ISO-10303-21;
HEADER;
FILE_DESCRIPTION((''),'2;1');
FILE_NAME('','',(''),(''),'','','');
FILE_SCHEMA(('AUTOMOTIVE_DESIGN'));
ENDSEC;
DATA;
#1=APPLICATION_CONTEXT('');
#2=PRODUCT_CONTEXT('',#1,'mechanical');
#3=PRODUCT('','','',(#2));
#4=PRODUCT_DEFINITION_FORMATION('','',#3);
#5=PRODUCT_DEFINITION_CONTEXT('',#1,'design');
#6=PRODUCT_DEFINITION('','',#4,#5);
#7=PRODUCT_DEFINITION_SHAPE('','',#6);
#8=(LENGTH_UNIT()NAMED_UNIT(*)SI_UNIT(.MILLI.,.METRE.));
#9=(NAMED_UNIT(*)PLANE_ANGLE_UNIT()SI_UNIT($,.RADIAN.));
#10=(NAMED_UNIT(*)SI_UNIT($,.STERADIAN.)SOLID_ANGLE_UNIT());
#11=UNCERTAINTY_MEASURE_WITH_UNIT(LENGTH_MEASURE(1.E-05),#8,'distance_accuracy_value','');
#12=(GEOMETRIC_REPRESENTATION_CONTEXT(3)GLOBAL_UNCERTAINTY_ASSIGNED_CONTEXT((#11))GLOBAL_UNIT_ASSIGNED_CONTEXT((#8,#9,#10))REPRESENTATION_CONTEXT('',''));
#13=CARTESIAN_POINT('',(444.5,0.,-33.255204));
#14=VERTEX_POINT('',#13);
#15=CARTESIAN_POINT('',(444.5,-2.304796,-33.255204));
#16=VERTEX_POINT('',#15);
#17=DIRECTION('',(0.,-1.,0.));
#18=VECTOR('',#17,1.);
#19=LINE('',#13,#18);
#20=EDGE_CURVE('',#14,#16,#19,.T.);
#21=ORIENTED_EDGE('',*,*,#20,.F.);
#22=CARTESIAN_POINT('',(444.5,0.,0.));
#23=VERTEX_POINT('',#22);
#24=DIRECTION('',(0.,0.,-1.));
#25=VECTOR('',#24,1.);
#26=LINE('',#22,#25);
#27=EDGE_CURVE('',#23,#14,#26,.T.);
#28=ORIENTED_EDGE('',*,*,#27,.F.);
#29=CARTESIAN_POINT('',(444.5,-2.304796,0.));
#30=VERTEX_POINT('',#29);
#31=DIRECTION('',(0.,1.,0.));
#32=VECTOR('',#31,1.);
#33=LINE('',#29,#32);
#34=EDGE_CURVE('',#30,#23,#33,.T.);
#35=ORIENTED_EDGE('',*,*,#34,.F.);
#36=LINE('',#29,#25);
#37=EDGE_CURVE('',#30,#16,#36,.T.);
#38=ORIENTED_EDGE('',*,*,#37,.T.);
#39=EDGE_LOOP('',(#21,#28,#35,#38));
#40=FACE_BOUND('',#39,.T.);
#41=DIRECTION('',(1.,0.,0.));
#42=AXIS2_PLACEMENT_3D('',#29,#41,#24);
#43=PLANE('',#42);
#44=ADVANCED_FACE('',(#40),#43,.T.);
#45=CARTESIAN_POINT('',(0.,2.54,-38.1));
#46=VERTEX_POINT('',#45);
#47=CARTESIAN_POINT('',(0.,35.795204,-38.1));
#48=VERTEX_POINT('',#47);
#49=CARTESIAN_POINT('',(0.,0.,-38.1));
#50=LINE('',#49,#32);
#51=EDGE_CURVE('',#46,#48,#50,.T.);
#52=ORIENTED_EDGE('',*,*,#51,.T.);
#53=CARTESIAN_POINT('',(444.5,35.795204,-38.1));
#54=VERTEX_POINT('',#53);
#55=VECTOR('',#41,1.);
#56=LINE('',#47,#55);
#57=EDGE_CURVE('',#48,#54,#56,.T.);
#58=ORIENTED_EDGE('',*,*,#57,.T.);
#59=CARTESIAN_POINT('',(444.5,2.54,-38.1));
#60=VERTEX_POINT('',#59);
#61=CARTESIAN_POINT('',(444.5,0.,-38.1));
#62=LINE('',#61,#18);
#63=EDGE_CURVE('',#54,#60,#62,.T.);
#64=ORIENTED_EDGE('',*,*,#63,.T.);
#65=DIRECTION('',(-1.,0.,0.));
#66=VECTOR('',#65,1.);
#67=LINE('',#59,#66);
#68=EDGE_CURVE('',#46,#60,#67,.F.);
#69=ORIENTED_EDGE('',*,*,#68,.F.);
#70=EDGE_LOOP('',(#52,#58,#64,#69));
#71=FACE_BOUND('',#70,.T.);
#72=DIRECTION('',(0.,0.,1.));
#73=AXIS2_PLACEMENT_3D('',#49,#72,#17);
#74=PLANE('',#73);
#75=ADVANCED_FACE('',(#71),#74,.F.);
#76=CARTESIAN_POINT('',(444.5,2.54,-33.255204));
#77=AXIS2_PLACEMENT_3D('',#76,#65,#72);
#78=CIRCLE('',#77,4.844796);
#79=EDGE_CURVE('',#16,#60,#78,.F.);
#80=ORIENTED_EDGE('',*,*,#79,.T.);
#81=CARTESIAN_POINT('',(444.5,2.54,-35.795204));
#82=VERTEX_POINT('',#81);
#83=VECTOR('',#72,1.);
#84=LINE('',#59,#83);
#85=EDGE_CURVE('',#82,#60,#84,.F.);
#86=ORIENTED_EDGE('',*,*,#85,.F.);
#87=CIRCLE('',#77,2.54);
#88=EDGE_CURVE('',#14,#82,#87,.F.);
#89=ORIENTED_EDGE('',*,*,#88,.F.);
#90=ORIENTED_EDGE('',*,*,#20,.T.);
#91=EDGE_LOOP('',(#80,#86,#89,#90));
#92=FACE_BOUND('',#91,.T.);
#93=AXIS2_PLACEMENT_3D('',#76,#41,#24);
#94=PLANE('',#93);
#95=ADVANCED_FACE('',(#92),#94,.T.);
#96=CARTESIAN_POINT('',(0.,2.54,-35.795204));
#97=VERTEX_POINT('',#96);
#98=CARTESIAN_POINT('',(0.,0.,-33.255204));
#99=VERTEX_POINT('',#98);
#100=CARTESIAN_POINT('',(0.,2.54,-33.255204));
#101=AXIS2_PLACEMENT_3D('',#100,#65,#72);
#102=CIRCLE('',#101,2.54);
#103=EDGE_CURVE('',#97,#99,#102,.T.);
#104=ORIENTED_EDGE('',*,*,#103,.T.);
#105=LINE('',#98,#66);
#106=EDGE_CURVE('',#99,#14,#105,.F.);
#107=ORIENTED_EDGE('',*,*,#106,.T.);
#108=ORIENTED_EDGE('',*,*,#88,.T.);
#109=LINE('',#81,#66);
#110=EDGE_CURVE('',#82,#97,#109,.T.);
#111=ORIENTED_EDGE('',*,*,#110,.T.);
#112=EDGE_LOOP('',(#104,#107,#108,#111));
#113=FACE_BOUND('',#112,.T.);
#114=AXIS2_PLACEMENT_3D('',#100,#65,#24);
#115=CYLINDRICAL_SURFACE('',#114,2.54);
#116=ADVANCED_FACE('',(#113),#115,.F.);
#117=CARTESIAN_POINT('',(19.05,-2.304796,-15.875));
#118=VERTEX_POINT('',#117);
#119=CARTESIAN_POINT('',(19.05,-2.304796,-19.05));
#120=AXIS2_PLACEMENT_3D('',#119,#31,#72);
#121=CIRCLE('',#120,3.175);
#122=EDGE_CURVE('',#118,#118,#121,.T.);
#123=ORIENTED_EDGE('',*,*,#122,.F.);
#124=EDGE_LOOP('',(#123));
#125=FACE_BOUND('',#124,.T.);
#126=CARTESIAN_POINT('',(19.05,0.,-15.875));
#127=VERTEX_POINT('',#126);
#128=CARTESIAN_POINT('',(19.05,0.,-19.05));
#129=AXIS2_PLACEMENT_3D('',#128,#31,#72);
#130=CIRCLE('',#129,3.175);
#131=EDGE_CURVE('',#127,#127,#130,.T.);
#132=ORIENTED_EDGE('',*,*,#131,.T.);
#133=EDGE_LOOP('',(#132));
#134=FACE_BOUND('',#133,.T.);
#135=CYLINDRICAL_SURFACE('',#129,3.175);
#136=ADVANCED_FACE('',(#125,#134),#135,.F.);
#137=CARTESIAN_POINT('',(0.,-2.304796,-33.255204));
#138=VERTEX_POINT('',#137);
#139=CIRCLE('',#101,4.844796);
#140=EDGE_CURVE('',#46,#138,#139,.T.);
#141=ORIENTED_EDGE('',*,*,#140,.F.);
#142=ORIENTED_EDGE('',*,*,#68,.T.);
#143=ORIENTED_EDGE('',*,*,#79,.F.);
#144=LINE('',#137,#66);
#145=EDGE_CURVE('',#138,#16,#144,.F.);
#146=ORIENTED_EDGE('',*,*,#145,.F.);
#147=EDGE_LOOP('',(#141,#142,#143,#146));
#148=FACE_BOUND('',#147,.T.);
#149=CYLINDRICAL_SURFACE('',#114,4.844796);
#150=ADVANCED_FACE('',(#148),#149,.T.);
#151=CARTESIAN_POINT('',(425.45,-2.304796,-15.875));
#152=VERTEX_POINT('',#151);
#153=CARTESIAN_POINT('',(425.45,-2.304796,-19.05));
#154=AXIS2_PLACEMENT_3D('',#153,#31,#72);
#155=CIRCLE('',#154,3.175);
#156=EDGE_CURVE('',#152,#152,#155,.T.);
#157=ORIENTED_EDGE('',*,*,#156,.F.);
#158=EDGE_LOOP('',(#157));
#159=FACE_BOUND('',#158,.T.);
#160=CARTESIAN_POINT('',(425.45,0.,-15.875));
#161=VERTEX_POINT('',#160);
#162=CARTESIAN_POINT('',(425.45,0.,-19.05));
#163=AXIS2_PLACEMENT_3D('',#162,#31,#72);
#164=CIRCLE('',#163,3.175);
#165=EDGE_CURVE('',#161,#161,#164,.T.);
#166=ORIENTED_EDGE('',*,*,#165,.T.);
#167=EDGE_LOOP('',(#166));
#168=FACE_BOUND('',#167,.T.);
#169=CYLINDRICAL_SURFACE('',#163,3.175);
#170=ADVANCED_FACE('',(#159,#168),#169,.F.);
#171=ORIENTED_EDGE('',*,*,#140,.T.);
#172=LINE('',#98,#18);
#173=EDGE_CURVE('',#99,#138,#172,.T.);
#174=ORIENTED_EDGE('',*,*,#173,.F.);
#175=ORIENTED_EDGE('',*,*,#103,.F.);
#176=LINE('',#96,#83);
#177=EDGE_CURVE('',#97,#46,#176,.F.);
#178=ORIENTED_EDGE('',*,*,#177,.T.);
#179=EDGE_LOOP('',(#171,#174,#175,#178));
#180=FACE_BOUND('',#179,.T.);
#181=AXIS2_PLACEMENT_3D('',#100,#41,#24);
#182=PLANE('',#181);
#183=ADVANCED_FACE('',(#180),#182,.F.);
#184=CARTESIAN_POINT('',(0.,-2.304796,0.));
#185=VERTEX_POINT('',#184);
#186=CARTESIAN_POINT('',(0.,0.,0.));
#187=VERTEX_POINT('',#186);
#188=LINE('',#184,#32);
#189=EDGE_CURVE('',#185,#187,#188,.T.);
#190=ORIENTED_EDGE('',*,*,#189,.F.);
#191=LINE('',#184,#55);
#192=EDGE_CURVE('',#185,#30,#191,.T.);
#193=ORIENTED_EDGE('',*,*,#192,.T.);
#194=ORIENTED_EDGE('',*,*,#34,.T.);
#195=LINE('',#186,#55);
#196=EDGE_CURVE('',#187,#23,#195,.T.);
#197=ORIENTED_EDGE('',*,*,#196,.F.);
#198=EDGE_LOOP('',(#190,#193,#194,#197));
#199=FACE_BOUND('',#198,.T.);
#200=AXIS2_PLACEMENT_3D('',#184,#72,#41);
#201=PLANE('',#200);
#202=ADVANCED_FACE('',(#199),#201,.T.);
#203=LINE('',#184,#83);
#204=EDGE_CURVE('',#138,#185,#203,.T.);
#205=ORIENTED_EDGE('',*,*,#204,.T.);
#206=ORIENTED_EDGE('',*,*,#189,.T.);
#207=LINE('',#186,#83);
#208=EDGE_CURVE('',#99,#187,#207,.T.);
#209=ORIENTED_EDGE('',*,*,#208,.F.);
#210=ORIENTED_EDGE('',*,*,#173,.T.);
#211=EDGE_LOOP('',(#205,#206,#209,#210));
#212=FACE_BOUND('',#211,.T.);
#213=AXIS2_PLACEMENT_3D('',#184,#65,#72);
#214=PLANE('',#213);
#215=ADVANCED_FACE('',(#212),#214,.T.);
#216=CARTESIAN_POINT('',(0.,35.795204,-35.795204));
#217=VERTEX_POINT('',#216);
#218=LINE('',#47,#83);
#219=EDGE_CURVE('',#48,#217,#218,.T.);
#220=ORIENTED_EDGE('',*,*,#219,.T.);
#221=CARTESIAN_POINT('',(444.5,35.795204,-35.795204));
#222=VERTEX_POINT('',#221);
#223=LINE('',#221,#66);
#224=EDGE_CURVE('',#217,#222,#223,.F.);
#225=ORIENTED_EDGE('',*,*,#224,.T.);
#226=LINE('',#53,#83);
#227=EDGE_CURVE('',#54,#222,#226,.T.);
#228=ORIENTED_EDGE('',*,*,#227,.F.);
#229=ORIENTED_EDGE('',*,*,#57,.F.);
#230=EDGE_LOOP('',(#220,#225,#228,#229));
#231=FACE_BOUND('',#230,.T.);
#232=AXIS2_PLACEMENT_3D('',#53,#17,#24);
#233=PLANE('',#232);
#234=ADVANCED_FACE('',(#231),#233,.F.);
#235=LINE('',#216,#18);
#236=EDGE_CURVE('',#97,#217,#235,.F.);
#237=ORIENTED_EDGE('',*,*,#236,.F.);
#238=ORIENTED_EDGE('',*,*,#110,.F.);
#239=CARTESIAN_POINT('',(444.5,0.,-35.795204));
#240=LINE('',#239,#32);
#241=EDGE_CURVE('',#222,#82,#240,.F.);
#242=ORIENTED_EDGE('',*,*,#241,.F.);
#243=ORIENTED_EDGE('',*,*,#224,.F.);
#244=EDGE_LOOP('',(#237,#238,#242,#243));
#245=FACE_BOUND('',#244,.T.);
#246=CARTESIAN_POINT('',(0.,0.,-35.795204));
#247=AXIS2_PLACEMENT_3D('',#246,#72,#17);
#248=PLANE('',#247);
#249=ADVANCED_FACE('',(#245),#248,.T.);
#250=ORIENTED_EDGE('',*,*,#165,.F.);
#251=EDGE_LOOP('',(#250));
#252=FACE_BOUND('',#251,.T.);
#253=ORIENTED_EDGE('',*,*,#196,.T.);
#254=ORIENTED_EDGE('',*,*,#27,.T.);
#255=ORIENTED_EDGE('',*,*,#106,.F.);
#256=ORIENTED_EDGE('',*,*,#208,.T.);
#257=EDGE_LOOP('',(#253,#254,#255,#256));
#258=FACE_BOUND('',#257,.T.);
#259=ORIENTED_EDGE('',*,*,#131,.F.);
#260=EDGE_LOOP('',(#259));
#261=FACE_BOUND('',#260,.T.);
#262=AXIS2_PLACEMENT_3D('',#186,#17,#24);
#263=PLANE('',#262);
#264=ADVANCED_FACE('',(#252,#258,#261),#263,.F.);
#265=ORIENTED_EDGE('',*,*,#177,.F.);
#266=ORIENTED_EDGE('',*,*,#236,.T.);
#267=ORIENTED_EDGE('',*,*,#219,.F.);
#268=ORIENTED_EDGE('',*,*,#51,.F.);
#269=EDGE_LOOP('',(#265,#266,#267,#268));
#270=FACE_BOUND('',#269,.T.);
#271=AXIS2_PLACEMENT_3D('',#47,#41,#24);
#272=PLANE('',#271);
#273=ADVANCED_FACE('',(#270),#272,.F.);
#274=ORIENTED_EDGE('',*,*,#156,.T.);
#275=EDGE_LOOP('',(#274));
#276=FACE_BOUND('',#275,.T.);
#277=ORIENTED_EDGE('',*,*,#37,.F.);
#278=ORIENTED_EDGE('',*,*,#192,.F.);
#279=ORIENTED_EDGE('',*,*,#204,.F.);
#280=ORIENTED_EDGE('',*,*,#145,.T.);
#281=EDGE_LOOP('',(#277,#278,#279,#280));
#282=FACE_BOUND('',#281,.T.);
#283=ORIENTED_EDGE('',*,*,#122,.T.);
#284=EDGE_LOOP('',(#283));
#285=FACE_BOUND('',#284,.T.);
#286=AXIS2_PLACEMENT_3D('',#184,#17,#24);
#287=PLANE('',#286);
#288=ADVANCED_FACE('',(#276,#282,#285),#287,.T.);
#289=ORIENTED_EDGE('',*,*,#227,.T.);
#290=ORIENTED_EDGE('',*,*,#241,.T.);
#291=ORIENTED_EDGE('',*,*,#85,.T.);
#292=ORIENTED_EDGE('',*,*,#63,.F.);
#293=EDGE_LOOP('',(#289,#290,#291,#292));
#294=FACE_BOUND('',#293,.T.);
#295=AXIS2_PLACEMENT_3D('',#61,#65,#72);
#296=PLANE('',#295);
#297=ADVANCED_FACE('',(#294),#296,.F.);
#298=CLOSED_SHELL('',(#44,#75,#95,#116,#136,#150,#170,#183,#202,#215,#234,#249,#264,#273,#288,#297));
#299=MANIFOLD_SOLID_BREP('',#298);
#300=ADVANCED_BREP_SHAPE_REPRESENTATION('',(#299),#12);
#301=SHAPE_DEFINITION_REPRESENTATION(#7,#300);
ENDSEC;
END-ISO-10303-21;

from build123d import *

# Parameters (mm, degrees)
SKETCH1_W                    = 444.5
SKETCH1_H                    = 38.1
BASE_FLANGE1_DEPTH           = 2.304796
EDGE_FLANGE1_STRIP_W         = 14.299184
EDGE_FLANGE1_STRIP_H         = 2.304796
EDGE_FLANGE1_STRIP_CUT_DEPTH = 444.5
EDGE_FLANGE1_DEPTH           = 444.5
F_1_4_0_25_DIAMETER_HOLE1_D  = 6.35


# Sheet-metal steps are written as plain solids
with BuildPart() as part:
    # Sketch1 → Base-Flange1 (new body)
    with BuildSketch(Plane(origin=(0, 0, 0), x_dir=(1, 0, 0), z_dir=(0, 1, 0))):
        with Locations((222.25, 19.05)):
            Rectangle(SKETCH1_W, SKETCH1_H)
    extrude(amount=-BASE_FLANGE1_DEPTH)

    # Edge-Flange1 strip (across the edge) → Edge-Flange1 strip cut (cut)
    with BuildSketch(Plane(origin=(444.5, 0, -38.1), x_dir=(0, 0, 1), z_dir=(-1, 0, 0))):
        with Locations((-2.304796, -1.152398)):
            Rectangle(EDGE_FLANGE1_STRIP_W, EDGE_FLANGE1_STRIP_H)
    extrude(amount=EDGE_FLANGE1_STRIP_CUT_DEPTH, mode=Mode.SUBTRACT)

    # Edge-Flange1 section (across the edge) → Edge-Flange1 (add)
    with BuildSketch(Plane(origin=(444.5, 0, -38.1), x_dir=(0, 0, 1), z_dir=(-1, 0, 0))):
        with BuildLine():
            Line((0, 2.54), (0, 35.795204))
            Line((0, 35.795204), (2.304796, 35.795204))
            Line((2.304796, 35.795204), (2.304796, 2.54))
            ThreePointArc((2.304796, 2.54), (3.048744776, 0.743948776), (4.844796, 0))
            Line((4.844796, 0), (4.844796, -2.304796))
            ThreePointArc((4.844796, -2.304796), (1.419007895, -0.885788105), (0, 2.54))
        make_face()
    extrude(amount=EDGE_FLANGE1_DEPTH)

    # 1/4 (0.25) Diameter Hole1 (through all)
    with Locations(Plane(origin=(0, 0, 0), x_dir=(1, 0, 0), z_dir=(0, 1, 0))):
        with Locations((19.05, 19.05), (425.45, 19.05)):
            Hole(F_1_4_0_25_DIAMETER_HOLE1_D / 2)


solid = part.part
